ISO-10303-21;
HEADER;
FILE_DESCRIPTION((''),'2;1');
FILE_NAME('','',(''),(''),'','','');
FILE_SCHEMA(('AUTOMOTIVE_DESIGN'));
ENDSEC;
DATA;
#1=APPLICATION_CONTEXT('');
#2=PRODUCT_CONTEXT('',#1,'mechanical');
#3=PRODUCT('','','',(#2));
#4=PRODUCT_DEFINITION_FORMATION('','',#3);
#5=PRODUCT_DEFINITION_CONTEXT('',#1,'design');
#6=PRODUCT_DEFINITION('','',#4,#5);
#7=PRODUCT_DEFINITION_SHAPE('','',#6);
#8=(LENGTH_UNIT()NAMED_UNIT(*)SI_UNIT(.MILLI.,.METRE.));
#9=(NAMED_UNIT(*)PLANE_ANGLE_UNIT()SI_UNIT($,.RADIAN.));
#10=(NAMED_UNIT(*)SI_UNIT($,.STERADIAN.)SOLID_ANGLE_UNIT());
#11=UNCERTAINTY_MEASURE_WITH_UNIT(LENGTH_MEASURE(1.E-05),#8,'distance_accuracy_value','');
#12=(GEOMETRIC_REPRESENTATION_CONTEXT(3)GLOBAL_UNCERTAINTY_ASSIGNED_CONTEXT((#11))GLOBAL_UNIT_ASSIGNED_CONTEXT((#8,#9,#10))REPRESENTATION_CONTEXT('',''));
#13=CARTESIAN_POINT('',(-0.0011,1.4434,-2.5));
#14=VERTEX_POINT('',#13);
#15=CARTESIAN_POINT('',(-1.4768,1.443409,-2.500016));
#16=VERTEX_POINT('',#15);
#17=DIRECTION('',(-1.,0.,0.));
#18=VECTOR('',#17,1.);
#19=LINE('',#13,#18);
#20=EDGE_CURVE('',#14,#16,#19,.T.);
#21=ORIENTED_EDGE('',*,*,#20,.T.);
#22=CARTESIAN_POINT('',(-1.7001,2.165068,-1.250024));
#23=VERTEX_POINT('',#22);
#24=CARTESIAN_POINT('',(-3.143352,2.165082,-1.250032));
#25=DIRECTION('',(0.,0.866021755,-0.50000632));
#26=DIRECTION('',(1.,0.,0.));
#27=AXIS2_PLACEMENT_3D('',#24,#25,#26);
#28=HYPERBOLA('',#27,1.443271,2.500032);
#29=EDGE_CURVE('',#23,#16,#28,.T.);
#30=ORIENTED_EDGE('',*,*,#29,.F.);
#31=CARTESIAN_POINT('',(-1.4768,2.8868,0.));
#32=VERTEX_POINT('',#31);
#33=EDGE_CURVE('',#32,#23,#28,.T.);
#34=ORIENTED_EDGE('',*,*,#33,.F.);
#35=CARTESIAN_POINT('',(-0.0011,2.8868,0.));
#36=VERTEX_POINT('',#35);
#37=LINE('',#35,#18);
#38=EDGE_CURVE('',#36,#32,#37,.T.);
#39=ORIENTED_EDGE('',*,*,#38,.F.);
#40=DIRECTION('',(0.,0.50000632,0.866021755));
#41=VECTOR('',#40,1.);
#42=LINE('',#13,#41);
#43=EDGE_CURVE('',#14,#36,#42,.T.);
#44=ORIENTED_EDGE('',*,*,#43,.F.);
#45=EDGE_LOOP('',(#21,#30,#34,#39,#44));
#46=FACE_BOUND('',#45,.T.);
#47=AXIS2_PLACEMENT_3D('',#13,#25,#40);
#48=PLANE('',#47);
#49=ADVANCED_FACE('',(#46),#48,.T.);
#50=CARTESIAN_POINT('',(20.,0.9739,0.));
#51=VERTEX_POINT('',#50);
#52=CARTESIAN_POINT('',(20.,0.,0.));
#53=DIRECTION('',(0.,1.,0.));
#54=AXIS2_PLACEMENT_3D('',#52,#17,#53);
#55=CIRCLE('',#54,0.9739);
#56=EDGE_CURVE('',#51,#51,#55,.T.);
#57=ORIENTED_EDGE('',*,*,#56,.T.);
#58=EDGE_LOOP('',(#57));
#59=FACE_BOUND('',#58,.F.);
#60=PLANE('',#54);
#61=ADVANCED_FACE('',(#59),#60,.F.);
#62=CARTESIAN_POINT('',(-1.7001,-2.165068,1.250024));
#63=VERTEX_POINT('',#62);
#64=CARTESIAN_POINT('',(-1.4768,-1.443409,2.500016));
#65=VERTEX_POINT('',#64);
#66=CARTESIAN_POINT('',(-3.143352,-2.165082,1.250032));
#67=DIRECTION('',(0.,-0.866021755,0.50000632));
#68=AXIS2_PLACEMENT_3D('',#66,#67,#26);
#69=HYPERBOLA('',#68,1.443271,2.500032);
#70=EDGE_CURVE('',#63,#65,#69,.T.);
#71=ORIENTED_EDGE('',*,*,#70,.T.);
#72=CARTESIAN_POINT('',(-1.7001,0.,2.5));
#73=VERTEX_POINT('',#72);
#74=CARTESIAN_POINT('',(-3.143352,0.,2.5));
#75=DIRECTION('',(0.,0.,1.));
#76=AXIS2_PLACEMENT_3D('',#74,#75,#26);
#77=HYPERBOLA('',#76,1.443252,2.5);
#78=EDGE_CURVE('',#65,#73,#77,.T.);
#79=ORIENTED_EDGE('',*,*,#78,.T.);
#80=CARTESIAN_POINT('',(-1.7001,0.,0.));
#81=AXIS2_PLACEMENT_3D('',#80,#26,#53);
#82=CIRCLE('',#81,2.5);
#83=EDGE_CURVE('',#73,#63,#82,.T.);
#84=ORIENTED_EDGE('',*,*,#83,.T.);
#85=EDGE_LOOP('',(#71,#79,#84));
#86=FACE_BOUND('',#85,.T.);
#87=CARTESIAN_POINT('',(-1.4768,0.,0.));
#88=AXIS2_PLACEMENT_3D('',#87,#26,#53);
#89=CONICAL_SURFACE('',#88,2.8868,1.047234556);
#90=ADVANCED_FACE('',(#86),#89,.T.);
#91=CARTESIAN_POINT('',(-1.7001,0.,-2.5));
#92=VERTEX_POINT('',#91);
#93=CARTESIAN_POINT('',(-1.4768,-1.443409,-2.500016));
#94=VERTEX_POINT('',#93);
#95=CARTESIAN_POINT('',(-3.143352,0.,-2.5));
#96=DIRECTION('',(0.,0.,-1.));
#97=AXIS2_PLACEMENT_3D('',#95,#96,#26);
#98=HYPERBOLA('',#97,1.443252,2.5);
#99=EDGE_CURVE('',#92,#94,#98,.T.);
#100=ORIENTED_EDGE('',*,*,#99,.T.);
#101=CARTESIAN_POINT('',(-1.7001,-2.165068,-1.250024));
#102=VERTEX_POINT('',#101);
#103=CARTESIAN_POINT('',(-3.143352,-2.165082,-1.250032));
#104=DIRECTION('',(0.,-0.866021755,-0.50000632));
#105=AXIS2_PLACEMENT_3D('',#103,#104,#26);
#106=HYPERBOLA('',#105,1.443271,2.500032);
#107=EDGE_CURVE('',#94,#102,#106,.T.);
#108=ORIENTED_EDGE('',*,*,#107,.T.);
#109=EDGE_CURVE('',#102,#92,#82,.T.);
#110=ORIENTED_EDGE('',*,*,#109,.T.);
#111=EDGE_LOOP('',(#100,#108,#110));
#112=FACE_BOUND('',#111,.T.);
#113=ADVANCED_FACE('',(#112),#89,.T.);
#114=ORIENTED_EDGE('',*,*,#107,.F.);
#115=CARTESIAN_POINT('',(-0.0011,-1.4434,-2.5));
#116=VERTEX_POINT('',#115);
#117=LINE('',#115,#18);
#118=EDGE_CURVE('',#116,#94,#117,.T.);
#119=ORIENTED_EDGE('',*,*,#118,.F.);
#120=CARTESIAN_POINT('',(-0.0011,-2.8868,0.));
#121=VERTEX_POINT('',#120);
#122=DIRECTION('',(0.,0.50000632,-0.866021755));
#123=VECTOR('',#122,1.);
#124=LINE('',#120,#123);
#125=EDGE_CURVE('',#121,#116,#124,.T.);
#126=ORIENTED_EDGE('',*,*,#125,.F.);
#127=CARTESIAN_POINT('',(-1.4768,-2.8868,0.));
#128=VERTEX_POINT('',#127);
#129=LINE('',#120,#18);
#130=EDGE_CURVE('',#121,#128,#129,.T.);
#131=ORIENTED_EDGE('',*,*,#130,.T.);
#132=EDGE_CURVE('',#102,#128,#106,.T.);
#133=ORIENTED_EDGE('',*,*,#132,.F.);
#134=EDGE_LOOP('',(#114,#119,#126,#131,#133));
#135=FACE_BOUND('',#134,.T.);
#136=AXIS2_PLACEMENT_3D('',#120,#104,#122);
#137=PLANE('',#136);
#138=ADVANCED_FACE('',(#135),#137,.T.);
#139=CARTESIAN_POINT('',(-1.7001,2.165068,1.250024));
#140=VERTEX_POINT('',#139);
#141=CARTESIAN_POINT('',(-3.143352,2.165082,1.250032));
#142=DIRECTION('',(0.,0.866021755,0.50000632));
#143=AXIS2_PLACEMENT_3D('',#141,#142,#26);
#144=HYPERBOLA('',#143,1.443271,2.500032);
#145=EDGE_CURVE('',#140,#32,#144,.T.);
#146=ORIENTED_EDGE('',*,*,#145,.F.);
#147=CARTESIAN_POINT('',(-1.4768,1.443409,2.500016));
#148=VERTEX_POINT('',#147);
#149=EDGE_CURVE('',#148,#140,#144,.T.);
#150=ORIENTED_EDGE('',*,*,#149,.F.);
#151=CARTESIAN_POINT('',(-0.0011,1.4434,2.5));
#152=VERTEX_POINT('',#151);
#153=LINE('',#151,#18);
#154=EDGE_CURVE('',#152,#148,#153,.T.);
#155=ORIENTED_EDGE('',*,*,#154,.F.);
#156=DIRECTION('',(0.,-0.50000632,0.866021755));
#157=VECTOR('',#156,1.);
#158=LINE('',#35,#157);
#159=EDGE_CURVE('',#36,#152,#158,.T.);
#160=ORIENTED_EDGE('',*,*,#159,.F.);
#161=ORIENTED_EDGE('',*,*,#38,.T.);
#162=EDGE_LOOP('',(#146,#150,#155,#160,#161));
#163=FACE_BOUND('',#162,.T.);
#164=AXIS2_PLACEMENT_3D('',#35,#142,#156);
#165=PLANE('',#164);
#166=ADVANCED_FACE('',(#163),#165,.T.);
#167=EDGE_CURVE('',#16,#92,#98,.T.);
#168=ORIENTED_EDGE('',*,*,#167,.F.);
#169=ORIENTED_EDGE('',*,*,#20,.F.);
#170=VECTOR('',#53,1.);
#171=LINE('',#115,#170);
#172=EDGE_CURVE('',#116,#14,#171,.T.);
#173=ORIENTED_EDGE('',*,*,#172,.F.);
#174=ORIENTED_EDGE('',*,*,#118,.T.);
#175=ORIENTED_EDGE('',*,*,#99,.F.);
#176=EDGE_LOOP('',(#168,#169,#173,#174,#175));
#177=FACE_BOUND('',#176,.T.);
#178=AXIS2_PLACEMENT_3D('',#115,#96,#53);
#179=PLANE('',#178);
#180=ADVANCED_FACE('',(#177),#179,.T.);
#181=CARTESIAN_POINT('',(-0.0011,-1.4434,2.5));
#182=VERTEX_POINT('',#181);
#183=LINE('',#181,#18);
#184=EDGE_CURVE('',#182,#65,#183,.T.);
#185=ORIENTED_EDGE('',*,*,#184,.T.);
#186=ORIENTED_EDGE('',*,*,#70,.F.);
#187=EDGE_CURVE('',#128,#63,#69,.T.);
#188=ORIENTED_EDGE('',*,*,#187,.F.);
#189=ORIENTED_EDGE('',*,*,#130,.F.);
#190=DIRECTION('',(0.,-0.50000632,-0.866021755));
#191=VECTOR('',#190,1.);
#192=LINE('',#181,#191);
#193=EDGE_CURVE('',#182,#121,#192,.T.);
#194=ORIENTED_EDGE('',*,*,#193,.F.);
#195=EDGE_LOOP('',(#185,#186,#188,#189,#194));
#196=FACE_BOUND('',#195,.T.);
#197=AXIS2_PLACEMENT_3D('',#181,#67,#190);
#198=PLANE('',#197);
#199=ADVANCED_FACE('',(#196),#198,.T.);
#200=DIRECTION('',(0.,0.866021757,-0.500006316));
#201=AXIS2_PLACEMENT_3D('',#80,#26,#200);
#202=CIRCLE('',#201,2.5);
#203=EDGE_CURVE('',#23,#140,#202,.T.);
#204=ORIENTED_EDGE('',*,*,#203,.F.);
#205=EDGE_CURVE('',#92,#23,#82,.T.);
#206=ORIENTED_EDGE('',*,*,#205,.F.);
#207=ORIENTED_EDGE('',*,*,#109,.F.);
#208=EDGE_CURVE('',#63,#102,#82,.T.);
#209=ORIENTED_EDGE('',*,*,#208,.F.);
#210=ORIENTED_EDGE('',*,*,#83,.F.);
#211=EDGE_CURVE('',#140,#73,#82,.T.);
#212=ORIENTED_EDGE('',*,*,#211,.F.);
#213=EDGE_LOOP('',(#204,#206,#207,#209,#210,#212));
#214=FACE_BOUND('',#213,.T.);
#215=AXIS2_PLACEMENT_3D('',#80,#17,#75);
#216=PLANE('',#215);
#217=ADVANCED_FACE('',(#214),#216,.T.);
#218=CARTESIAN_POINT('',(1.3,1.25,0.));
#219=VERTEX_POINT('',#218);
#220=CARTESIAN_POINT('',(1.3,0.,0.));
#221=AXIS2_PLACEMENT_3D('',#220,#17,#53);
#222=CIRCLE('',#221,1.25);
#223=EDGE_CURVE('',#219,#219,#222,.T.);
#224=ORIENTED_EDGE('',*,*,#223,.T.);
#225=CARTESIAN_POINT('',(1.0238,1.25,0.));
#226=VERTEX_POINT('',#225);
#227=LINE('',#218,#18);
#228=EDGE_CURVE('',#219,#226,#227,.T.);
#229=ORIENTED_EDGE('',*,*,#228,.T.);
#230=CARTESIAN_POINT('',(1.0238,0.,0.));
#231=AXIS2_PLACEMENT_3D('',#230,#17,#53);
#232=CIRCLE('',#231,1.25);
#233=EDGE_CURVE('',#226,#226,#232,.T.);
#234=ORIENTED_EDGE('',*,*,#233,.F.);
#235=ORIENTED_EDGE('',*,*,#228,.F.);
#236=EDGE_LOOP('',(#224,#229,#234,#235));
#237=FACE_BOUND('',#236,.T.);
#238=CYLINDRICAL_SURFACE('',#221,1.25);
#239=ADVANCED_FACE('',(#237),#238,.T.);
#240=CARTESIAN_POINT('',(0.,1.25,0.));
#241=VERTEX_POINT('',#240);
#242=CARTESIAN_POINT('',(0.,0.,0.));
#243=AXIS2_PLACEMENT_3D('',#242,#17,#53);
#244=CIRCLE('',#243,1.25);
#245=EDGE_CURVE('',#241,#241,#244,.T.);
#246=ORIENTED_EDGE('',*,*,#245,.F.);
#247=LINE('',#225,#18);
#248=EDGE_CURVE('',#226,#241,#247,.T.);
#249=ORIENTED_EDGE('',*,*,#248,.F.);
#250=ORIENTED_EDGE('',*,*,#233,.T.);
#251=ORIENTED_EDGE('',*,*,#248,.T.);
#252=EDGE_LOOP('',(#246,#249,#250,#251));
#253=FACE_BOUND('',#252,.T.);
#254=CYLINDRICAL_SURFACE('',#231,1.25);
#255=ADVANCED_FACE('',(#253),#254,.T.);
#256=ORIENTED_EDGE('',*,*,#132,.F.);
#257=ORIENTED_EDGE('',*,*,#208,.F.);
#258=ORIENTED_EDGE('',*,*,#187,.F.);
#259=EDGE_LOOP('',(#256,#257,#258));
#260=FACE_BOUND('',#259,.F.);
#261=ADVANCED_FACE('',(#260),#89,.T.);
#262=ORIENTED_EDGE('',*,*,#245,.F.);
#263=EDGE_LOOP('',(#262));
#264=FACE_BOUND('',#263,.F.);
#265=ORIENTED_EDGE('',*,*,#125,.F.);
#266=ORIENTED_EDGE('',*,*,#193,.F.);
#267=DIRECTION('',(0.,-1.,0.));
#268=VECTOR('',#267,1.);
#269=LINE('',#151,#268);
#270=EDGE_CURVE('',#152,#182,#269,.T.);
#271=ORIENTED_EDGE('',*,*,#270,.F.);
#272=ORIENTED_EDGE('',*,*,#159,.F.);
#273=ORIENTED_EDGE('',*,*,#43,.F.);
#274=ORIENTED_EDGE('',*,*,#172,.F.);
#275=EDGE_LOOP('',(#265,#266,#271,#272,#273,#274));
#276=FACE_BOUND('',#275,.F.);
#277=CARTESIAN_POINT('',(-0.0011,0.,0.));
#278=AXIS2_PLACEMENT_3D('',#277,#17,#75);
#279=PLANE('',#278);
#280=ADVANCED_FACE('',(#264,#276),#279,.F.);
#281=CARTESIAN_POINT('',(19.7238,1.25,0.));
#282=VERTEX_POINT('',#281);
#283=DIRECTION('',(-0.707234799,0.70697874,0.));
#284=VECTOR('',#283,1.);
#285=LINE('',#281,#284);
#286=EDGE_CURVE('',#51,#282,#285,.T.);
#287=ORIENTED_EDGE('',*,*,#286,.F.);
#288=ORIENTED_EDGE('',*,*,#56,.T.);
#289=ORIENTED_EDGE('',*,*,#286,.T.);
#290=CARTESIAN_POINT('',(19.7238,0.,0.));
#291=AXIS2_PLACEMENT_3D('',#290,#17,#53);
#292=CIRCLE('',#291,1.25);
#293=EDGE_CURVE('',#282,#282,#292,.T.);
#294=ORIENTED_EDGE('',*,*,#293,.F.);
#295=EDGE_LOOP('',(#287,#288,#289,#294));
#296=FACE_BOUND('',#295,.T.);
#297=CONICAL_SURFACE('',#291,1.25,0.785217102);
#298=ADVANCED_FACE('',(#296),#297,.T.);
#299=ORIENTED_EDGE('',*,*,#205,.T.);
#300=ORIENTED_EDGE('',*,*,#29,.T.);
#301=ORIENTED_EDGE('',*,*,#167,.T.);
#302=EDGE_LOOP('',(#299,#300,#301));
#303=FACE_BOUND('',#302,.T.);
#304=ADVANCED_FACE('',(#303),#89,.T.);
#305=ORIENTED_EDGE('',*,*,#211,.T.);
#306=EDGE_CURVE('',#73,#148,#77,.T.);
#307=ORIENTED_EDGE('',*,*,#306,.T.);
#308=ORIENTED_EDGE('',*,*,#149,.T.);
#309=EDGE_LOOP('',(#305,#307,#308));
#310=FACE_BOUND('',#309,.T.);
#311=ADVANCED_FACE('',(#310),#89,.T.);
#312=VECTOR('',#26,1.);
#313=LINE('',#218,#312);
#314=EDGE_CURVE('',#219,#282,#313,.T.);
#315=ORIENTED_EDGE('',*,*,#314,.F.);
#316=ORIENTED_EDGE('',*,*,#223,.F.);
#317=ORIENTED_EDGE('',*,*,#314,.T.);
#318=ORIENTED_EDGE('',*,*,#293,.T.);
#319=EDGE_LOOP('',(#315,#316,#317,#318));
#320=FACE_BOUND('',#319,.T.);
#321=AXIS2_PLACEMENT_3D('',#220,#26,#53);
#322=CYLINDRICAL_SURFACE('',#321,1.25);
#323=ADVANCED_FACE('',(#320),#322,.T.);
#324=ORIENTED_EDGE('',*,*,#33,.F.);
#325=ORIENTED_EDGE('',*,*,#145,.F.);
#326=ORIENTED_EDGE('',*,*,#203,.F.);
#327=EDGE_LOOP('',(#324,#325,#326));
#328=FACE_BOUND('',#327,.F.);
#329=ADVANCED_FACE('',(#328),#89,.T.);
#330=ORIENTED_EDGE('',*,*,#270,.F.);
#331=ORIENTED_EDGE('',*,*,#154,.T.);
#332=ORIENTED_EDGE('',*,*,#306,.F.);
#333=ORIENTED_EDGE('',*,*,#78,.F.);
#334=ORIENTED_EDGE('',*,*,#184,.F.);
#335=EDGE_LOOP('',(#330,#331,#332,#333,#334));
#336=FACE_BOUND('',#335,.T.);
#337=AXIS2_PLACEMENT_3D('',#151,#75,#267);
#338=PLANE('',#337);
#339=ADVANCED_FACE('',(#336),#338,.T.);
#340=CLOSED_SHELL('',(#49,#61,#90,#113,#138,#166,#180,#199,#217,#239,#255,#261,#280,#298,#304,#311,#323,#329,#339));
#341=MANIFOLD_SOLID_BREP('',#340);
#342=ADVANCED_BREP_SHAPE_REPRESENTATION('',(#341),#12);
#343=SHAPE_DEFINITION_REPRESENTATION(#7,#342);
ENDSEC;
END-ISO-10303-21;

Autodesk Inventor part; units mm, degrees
ref_plane "YZ Plane" through (0, 0, 0) normal (1, 0, 0) x (0, 1, 0)
ref_plane "XZ Plane" through (0, 0, 0) normal (0, 1, 0) x (-1, 0, 0)
sketch "Sketch1" plane through (0, 0, 0) normal (0, 0, 1) x (1, 0, 0)
  line L0 (0, 2.5) -> (0, 1.25)
  line L1 (1.3, 1.25) -> (20, 1.25)
  line L2 (20, 1.25) -> (20, 0)
  line L3 (20, 0) -> (-0.0011, 0)
  line L4 (-4.0013, 0) -> (24.0002, 0) projected
  line L5 (-0.0011, 0) -> (-0.0011, 2.5)
  line L6 (-0.0011, 2.5) -> (0, 2.5)
  line L7 (1.3, 1.25) -> (1.0238, 1.25)
  line L8 (1.0238, 1.25) -> (0, 1.25)
  line L9 (0, -0.5) -> (0, 3) projected
  dimension "d0" = 20
  dimension "d1" = 18.7
  dimension "d2" = 2.5
  dimension "d9" = 0.0011
  dimension "d10" = 5
  dimension "d13" = 0.2762
  dimension "d14" = 2.5
revolve "Body" add sketch "Sketch1" angle 360 about axis through (20, 0, 0) along (-1, 0, 0)
sketch "Sketch2" plane through (-0.0011, 0, 0) normal (-1, 0, 0) x (0, 0, 1)
  line L0 (0, 2.8868) -> (2.5, 1.4434)
  line L1 (2.5, 1.4434) -> (2.5, -1.4434)
  line L2 (2.5, -1.4434) -> (0, -2.8868)
  line L3 (0, -2.8868) -> (-2.5, -1.4434)
  line L4 (-2.5, -1.4434) -> (-2.5, 1.4434)
  line L5 (-2.5, 1.4434) -> (0, 2.8868)
  point P0 (0, 0)
  point P1 (0, 0)
  dimension "d11" = 5
extrude "Head" add sketch "Sketch2" along normal blind 1.699
sketch "Sketch4" plane through (0, 0, 0) normal (0, 0, 1) x (1, 0, 0)
  line L0 (-1.7001, 2.5) -> (-1.7001, 2.8868)
  line L1 (-1.7001, 2.8868) -> (-1.4768, 2.8868)
  line L2 (-1.4768, 2.8868) -> (-1.7001, 2.5)
  line L3 (-2.0399, 0) -> (0.3387, 0) projected
  line L4 (-0.0011, 2.8868) -> (-1.7001, 2.8868) projected
  line L5 (-1.7001, 1.4434) -> (-1.7001, 2.8868) projected
  dimension "d5" = 30
  dimension "d19" = 5
revolve "Chamfer1" cut sketch "Sketch4" angle 360 about axis through (-10, 0, 0) along (1, 0, 0)
thread "Thread" size "M2.5x0.45" class "6g" standard "ISO Metric profile" length 18.7
chamfer "Chamfer2" distance 0.2761 distance2 0.2762 1 edges at (20, -1.25, 0) measured on face at (20, -0.025, 0.4802)
ref_plane "Work Plane1" through (1.525, 0, 0) normal (0, 0, 1) x (1, 0, 0)
equation "\"d0\" = NLG"
equation "\"d1\" = GEL"
equation "\"d2\" = GD"
equation "\"d10\" = SD2"
equation "\"d14\" = BDM"
equation "\"d11\" = SW"
equation "\"d3\" = KOH - SD"
equation "\"d5\" = ANG1"
equation "\"d19\" = SW0"
equation "\"d15\" = GEL"
equation "\"d6\" = -0.5 * SPD + 0.5 * GD"
equation "\"NLG\" = 20"
equation "\"GD\" = NND"
equation "\"BDM\" = NND"
equation "\"KOH\" = 1.7"
equation "\"GEL\" = 18.7"
equation "\"SW\" = 5"
equation "\"SW0\" = SW"
equation "\"SPD\" = NND - 1.2269 * PTC"
equation "\"SD2\" = SW"
equation "\"SD\" = 0.001"
equation "\"ANG1\" = 30deg"
equation "\"GAL\" = 0.61345 * PTC"
equation "\"GUL\" = 0.61345 * PTC"
equation "\"RR\" = 0.001"
equation "\"WFT\" = SD"
equation "\"GD1\" = THREADDIA - 1.2269 * PTC"
equation "\"THREADDIA\" = 2.5"
equation "\"SDH\" = SW"
equation "\"TOA\" = 30deg"
equation "\"FAWI\" = 45deg"
equation "\"PTC\" = 0.45"
equation "\"NND\" = 2.5"
equation "\"E0\" = 1.155 * SW"
properties part number "AS 1110 - M2,5 x 20" material "Steel, Mild"
